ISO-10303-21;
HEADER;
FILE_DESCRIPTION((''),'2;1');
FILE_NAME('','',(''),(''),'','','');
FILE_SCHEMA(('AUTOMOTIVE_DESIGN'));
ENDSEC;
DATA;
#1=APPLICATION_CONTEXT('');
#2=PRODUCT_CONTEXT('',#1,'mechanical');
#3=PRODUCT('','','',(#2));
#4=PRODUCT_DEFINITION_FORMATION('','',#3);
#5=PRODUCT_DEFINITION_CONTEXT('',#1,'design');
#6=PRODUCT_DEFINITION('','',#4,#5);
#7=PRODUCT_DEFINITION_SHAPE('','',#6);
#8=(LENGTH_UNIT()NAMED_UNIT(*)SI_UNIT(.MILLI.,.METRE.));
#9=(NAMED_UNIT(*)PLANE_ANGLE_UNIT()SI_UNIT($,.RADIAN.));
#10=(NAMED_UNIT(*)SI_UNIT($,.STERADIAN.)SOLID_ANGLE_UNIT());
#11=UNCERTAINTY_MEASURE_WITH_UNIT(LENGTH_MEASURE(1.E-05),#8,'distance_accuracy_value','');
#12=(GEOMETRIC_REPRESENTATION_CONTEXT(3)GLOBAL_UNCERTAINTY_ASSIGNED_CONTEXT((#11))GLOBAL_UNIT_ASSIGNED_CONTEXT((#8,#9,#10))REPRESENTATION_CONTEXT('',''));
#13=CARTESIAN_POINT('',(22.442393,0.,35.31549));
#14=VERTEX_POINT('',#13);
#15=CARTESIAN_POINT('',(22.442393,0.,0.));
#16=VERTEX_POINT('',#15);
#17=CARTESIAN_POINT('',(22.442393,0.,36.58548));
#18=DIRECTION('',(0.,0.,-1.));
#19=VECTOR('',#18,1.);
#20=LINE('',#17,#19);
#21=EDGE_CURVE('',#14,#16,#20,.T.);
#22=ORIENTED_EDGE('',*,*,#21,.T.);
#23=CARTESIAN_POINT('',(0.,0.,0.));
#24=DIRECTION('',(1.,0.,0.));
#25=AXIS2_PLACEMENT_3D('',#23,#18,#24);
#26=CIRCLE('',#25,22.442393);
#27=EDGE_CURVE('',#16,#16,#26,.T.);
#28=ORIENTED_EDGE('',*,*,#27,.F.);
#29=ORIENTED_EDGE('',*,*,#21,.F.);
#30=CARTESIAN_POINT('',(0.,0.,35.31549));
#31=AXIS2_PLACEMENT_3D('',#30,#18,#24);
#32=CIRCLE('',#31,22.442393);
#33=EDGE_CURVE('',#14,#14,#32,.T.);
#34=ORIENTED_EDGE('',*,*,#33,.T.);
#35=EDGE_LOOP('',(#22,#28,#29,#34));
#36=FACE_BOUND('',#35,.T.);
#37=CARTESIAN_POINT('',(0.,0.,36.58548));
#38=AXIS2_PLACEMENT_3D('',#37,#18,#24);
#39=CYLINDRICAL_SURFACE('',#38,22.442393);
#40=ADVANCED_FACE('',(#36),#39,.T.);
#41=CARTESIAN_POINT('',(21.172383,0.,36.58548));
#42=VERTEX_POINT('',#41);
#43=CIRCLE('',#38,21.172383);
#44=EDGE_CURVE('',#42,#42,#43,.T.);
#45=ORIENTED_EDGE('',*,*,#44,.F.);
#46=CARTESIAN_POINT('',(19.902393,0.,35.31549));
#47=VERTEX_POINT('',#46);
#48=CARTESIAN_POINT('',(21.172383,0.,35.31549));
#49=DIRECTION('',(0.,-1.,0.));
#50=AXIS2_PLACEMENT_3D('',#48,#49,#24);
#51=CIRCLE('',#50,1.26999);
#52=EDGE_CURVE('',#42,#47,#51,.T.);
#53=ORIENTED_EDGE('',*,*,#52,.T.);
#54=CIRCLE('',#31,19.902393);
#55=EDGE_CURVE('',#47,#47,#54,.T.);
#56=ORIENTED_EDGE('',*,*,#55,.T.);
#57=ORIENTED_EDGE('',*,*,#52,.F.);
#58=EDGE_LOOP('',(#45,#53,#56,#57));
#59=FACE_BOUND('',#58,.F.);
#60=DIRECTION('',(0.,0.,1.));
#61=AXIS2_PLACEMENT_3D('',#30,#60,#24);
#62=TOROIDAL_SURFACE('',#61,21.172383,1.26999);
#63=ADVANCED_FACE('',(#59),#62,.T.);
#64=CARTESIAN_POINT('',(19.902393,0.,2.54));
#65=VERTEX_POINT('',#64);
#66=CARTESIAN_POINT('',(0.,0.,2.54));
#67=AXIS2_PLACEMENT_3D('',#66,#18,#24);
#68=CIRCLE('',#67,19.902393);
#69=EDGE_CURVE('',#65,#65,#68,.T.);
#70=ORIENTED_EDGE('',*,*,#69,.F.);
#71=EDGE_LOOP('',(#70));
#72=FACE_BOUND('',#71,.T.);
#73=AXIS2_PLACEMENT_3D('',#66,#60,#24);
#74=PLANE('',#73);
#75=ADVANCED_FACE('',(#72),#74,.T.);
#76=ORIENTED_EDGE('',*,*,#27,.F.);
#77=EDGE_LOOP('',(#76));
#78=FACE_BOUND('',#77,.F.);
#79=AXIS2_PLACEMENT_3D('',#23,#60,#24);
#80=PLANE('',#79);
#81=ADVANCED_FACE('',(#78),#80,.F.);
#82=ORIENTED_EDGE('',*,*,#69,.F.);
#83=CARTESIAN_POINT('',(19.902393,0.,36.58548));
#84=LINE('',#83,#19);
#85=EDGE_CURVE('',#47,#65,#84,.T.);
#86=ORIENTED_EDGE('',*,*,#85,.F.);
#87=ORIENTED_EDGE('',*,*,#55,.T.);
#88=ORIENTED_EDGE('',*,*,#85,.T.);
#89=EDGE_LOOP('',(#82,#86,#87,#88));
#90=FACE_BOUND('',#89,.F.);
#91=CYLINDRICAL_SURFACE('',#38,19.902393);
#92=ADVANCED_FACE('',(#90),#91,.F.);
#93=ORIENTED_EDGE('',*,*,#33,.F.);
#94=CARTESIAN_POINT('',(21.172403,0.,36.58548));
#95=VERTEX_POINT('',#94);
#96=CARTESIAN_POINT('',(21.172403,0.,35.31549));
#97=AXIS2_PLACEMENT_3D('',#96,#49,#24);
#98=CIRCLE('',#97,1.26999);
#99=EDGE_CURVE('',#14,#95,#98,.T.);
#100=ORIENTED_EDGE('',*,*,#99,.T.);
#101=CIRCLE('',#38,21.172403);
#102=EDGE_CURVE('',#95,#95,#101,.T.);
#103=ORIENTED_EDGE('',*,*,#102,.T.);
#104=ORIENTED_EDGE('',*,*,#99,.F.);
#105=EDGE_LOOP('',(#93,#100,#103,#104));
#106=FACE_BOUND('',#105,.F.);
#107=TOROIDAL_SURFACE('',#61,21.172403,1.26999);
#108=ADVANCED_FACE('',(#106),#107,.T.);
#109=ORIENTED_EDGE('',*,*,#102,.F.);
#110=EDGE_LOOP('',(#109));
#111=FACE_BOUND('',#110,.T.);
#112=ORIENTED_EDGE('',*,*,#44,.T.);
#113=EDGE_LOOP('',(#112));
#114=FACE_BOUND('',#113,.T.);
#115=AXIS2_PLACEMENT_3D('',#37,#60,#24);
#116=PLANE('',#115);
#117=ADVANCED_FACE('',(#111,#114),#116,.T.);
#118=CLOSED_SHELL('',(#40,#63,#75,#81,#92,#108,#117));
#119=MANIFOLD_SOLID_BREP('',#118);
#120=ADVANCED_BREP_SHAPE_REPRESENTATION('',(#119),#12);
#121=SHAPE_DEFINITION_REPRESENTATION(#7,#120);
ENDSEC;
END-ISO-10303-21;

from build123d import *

# Parameters (mm, degrees)
F1_R = 22.4423927589
F3_T = -2.54
F4_R = 1.26999


# Not quite as in the source:
# - a fillet or chamfer is up to 0.001 mm smaller than in the source, because OpenCascade refuses the exact size


with BuildPart() as f2:
    # F2: sweep along a path in F0
    with BuildLine(Plane.XZ) as f2_path:
        Line((-22.9121223092, 36.5854799747), (-22.9121223092, 0))
    # F1 (on Top) → F2 (sweep)
    with BuildSketch(Plane.XY):
        Circle(F1_R)
    sweep(path=f2_path.line)

    # F3
    f3_openings = [f2.faces().sort_by_distance(p)[0] for p in [
        (0, 0, 36.58548),
    ]]
    offset(amount=F3_T, openings=f3_openings)

    # F4 (radius 1.27 in the source; OpenCascade refuses exactly that, so slightly less here)
    f4_edges = [f2.edges().sort_by_distance(p)[0] for p in [
        (-22.442393, 0, 36.58548),
        (-19.902393, 0, 36.58548),
    ]]
    fillet(f4_edges, radius=F4_R)


solid = f2.part
